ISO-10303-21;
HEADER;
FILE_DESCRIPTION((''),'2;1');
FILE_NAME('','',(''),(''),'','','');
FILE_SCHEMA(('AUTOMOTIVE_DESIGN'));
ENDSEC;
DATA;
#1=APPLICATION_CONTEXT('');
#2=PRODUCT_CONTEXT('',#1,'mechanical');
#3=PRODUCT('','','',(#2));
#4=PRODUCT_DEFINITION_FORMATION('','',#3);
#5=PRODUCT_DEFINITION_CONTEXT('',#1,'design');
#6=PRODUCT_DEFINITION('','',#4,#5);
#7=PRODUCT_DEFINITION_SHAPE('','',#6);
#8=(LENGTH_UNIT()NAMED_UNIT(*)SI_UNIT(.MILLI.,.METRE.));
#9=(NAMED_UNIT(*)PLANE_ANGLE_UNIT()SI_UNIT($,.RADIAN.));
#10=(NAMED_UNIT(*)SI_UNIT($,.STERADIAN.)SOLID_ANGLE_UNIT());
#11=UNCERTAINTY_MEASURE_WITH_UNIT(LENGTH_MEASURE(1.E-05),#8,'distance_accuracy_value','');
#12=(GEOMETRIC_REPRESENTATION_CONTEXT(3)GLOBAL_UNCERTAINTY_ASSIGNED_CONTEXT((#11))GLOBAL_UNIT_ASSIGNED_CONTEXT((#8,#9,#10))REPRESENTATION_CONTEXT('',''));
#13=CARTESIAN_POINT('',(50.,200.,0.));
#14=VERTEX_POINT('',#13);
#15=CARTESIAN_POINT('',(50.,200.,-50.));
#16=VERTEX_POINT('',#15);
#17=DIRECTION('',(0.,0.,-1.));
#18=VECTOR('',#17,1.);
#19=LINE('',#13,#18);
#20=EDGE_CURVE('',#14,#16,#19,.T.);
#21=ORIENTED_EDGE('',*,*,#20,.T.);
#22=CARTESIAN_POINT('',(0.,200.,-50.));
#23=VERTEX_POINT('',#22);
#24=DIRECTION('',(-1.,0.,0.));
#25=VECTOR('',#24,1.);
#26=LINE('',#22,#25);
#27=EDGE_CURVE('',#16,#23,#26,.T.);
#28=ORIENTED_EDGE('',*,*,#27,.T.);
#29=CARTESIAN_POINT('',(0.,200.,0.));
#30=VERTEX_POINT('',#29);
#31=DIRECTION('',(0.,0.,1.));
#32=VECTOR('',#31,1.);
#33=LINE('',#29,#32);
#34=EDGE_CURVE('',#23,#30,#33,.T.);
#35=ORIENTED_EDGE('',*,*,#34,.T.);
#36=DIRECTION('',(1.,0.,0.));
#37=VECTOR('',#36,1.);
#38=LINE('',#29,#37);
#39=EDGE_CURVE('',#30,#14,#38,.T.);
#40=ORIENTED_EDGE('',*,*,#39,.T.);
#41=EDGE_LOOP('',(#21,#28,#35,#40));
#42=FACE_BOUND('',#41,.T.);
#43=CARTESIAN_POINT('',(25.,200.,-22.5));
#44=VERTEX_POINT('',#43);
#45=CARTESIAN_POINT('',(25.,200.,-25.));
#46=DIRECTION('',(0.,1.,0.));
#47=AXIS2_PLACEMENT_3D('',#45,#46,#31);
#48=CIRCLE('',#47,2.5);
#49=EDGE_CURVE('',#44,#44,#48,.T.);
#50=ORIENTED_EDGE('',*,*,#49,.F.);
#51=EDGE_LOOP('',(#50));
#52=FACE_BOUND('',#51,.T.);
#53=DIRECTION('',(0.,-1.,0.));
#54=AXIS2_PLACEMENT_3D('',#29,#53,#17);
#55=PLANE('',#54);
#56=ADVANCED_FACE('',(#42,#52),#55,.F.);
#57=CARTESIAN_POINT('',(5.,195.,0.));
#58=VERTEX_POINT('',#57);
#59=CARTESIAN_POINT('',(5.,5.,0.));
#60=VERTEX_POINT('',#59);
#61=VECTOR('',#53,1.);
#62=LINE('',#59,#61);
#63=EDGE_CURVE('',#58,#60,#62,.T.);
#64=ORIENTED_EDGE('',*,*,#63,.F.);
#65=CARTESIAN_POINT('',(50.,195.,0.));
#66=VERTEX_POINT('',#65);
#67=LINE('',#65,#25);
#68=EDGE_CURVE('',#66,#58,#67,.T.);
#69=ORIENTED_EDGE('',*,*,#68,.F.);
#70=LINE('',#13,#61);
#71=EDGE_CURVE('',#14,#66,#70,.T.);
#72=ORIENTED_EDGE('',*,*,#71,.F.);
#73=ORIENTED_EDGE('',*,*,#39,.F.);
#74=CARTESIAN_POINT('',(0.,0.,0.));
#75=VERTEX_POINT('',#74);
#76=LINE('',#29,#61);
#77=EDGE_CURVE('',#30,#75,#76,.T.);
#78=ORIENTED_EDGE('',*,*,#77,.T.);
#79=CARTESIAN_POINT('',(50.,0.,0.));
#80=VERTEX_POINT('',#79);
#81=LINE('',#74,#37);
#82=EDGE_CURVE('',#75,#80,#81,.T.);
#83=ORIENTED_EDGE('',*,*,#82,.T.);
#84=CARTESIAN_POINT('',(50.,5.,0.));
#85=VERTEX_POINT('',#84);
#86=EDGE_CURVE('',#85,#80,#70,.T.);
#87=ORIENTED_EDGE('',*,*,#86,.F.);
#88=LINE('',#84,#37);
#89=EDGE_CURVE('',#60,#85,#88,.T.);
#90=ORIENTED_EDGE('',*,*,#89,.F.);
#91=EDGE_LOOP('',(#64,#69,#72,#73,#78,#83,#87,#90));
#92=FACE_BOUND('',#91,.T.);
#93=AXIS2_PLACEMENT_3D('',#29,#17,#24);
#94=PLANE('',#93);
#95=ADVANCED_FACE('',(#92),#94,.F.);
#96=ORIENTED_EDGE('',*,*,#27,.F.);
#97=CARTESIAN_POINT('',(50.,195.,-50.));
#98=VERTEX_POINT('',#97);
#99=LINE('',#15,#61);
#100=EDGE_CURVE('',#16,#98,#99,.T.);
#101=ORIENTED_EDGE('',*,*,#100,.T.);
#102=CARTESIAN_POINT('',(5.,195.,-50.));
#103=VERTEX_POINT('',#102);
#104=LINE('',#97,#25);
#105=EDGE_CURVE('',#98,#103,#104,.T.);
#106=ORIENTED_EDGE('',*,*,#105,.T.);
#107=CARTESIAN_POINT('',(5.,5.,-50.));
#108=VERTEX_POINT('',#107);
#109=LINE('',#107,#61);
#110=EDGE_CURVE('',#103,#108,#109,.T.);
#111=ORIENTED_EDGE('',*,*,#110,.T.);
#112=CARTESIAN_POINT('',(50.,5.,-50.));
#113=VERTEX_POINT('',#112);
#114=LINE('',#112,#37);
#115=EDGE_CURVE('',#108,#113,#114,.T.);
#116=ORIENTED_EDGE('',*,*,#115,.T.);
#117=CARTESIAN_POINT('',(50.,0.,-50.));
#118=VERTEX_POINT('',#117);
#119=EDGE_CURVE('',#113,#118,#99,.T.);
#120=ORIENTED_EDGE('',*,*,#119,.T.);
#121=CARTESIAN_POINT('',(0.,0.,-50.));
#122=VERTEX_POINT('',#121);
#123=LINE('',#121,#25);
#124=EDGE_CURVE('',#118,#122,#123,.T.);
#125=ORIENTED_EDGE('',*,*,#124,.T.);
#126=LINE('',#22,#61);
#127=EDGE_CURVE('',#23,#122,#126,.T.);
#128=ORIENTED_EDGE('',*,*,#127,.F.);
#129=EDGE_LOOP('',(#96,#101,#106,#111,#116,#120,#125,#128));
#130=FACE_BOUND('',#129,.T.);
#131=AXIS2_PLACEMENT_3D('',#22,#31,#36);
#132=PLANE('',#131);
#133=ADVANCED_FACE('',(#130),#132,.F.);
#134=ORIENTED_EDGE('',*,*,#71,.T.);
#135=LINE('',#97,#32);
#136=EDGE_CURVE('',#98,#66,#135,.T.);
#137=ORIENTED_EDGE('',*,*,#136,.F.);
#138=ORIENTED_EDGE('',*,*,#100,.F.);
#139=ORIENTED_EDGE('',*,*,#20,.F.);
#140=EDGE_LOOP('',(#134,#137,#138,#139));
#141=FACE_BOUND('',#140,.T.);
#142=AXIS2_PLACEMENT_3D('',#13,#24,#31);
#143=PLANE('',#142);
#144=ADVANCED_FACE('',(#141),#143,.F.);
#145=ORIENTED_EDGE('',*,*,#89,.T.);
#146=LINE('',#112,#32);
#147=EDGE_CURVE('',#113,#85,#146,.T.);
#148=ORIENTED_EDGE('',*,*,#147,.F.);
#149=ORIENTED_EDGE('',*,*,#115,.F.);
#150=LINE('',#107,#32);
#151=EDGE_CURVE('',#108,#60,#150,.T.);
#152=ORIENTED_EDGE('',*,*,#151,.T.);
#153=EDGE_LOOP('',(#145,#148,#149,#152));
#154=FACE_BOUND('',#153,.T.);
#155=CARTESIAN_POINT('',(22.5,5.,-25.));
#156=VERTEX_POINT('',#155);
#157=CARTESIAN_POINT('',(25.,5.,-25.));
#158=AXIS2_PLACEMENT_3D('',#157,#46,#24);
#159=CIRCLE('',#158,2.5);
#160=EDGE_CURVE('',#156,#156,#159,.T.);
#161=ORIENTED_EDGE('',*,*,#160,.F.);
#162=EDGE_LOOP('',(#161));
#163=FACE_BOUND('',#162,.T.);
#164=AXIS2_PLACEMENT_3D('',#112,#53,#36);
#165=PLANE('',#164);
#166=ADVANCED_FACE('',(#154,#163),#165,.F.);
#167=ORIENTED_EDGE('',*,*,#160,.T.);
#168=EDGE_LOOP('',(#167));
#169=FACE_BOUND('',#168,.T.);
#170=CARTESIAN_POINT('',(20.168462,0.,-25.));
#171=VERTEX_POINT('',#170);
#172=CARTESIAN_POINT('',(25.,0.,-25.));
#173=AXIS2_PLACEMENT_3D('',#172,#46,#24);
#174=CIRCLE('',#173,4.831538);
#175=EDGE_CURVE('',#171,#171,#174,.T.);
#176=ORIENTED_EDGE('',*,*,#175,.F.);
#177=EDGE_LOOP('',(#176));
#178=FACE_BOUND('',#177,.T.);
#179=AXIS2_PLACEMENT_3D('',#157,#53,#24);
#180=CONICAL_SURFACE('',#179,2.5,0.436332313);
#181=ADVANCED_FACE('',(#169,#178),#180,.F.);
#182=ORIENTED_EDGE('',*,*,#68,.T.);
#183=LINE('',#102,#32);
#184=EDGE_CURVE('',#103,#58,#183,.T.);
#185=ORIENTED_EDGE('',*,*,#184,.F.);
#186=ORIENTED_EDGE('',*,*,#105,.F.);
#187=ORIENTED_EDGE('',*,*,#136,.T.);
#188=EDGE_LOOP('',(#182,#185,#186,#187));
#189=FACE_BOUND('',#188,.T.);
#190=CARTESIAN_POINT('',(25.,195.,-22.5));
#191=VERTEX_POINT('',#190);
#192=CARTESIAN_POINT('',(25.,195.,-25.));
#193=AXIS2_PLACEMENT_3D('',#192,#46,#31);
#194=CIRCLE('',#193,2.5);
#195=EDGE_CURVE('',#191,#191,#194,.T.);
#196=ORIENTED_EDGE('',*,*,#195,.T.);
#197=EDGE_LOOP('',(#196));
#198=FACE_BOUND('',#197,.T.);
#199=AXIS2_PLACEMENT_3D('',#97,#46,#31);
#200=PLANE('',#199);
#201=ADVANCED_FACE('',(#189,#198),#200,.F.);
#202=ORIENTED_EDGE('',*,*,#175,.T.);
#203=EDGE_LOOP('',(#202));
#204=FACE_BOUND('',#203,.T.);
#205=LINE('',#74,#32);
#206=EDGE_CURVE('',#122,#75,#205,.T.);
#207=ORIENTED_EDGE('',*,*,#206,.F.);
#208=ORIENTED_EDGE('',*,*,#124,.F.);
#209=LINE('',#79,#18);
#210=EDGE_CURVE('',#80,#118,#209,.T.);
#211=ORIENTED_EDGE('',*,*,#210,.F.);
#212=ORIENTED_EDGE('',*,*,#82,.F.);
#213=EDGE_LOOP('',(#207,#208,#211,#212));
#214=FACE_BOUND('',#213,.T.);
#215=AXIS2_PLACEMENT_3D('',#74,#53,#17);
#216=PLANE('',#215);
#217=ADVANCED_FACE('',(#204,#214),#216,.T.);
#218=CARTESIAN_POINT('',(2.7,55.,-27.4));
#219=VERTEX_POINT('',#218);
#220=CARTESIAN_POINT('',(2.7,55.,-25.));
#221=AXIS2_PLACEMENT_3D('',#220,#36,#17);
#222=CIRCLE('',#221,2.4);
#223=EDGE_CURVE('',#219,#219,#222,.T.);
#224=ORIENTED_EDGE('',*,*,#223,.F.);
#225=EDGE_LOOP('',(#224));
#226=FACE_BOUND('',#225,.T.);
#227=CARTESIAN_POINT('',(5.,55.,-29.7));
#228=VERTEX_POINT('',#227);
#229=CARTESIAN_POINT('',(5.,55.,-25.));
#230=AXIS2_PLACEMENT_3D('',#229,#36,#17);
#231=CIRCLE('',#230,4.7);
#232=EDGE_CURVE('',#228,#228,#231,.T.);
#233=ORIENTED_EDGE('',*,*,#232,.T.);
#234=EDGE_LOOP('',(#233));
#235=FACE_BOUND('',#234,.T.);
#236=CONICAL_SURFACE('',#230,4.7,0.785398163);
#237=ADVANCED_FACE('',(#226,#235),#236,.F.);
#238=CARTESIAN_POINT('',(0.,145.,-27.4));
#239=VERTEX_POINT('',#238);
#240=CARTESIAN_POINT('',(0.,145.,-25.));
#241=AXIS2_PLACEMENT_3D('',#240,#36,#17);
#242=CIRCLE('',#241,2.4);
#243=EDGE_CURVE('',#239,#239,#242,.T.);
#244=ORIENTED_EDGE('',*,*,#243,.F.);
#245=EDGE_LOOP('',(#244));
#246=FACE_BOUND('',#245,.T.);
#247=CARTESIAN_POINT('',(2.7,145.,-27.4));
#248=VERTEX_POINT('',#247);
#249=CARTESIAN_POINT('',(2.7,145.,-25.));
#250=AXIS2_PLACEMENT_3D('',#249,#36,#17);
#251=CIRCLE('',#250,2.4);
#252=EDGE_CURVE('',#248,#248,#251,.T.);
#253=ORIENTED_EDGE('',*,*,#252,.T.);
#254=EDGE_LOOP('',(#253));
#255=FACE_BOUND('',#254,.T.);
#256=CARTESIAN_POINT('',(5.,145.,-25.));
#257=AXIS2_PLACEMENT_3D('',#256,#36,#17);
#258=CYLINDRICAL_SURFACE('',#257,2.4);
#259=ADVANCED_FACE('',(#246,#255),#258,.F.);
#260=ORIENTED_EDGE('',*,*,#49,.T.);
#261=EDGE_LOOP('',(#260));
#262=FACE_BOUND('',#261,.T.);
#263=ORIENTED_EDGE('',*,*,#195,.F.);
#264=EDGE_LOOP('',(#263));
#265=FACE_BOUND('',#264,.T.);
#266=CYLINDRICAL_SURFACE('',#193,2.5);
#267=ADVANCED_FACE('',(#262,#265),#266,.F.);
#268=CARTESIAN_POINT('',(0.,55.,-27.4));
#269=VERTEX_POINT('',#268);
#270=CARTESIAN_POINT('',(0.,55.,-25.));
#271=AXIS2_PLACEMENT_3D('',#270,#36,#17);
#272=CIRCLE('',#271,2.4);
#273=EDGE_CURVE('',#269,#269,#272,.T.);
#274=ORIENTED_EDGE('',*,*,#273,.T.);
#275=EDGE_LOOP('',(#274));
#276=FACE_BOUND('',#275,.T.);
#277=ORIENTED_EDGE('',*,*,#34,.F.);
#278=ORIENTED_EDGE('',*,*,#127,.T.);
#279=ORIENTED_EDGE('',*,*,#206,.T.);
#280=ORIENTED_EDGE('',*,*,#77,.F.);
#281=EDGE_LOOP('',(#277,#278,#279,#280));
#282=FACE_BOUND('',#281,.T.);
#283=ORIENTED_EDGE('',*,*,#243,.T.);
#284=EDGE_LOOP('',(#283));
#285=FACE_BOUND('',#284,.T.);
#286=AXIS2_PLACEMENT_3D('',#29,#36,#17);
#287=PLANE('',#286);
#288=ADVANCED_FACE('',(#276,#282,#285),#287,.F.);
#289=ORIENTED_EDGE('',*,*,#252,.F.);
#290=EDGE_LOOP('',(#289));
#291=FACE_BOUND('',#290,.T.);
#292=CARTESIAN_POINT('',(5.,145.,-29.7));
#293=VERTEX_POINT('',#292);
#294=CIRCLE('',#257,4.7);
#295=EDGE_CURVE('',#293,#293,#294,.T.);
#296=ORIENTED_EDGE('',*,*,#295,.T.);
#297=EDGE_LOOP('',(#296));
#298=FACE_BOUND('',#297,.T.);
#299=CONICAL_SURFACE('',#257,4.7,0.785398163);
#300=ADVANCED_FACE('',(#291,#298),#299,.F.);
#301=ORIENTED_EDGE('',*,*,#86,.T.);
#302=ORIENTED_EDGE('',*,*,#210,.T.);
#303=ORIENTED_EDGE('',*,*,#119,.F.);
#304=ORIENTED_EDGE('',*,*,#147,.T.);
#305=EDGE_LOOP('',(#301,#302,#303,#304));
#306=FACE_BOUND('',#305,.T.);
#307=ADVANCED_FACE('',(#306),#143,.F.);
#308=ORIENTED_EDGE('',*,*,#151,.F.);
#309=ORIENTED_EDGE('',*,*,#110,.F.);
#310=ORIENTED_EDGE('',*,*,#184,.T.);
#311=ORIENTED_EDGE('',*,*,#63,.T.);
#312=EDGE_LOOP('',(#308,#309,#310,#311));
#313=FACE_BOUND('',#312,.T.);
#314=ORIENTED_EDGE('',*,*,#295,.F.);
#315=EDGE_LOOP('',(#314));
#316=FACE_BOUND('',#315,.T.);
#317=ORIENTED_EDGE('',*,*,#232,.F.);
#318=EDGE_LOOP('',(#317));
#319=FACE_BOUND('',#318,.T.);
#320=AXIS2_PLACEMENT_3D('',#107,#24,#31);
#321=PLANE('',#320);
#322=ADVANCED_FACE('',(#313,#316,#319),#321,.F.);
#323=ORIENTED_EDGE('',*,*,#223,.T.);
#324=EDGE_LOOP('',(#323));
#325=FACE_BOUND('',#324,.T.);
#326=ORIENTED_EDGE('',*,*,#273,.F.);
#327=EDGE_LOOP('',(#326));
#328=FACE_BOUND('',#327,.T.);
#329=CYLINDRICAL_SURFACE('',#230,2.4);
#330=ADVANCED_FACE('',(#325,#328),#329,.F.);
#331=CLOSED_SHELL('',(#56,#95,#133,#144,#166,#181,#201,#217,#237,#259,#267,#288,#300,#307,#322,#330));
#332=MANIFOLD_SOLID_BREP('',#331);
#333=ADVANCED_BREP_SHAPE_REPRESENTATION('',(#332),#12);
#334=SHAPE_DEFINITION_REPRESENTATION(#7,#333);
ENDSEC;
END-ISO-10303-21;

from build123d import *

# Parameters (mm, degrees)
SKETCH1_W                                           = 50
SKETCH1_H                                           = 50
BOSS_EXTRUDE1_DEPTH                                 = 200
SKETCH2_W                                           = 45
SKETCH2_H                                           = 190
CUT_EXTRUDE1_DEPTH                                  = 50
HOLE1_START                                         = 195
HOLE1_OUTLINE_R                                     = 2.5
HOLE1_DEPTH                                         = 5
SKETCH12_R                                          = 2.5
CUT_EXTRUDE2_DEPTH                                  = 5
CUT_EXTRUDE2_DRAFT                                  = 25
CSK_FOR_M4_COUNTERSUNK_FLAT_HEAD_SCREW1_D           = 4.8
CSK_FOR_M4_COUNTERSUNK_FLAT_HEAD_SCREW1_CSINK_D     = 9.4
CSK_FOR_M4_COUNTERSUNK_FLAT_HEAD_SCREW1_CSINK_ANGLE = 90


# Read off the part's stored shape, not the designer's step: Hole1
with BuildPart() as part:
    # Sketch1 → Boss-Extrude1 (new body)
    with BuildSketch(Plane(origin=(0, 0, 0), x_dir=(1, 0, 0), z_dir=(0, 1, 0))):
        with Locations((25, 25)):
            Rectangle(SKETCH1_W, SKETCH1_H)
    extrude(amount=BOSS_EXTRUDE1_DEPTH)

    # Sketch2 → Cut-Extrude1 (cut)
    with BuildSketch(Plane.XY):
        with Locations((27.5, 100)):
            Rectangle(SKETCH2_W, SKETCH2_H)
    extrude(amount=-CUT_EXTRUDE1_DEPTH, mode=Mode.SUBTRACT)

    # Hole1 outline → Hole1 (cut)
    with BuildSketch(Plane(origin=(0, 0, 0), x_dir=(1, 0, 0), z_dir=(0, 1, 0)).offset(HOLE1_START)):
        with Locations((25, 25)):
            Circle(HOLE1_OUTLINE_R)
    extrude(amount=HOLE1_DEPTH, mode=Mode.SUBTRACT)


with BuildPart() as cut_extrude2_tool:
    # Sketch12 → Cut-Extrude2 (with draft: the straight prism first)
    with BuildSketch(Plane(origin=(0, 5, 0), x_dir=(1, 0, 0), z_dir=(0, 1, 0))):
        with Locations(Location((25, 25, 0), (0, 0, 270))):
            Circle(SKETCH12_R)
    extrude(amount=-CUT_EXTRUDE2_DEPTH)
    # Cut-Extrude2: the draft: its side faces are tilted about the plane it starts from
    cut_extrude2_sides = [cut_extrude2_tool.faces().sort_by_distance(p)[0] for p in [
        (25, 2.5, -27.5),
    ]]
    draft(cut_extrude2_sides, Plane(origin=(0, 5, 0), x_dir=(1, 0, 0), z_dir=(0, 1, 0)), CUT_EXTRUDE2_DRAFT)


with BuildPart() as part_1:
    add(part.part)

    # Cut-Extrude2: cut by cut_extrude2_tool
    add(cut_extrude2_tool.part, mode=Mode.SUBTRACT)

    # CSK for M4 Countersunk Flat Head Screw1 (through all)
    with Locations(Plane(origin=(5, 0, 0), x_dir=(0, 0, -1), z_dir=(1, 0, 0))):
        with Locations((25, 145), (25, 55)):
            CounterSinkHole(CSK_FOR_M4_COUNTERSUNK_FLAT_HEAD_SCREW1_D / 2, CSK_FOR_M4_COUNTERSUNK_FLAT_HEAD_SCREW1_CSINK_D / 2, counter_sink_angle=CSK_FOR_M4_COUNTERSUNK_FLAT_HEAD_SCREW1_CSINK_ANGLE)


solid = part_1.part
